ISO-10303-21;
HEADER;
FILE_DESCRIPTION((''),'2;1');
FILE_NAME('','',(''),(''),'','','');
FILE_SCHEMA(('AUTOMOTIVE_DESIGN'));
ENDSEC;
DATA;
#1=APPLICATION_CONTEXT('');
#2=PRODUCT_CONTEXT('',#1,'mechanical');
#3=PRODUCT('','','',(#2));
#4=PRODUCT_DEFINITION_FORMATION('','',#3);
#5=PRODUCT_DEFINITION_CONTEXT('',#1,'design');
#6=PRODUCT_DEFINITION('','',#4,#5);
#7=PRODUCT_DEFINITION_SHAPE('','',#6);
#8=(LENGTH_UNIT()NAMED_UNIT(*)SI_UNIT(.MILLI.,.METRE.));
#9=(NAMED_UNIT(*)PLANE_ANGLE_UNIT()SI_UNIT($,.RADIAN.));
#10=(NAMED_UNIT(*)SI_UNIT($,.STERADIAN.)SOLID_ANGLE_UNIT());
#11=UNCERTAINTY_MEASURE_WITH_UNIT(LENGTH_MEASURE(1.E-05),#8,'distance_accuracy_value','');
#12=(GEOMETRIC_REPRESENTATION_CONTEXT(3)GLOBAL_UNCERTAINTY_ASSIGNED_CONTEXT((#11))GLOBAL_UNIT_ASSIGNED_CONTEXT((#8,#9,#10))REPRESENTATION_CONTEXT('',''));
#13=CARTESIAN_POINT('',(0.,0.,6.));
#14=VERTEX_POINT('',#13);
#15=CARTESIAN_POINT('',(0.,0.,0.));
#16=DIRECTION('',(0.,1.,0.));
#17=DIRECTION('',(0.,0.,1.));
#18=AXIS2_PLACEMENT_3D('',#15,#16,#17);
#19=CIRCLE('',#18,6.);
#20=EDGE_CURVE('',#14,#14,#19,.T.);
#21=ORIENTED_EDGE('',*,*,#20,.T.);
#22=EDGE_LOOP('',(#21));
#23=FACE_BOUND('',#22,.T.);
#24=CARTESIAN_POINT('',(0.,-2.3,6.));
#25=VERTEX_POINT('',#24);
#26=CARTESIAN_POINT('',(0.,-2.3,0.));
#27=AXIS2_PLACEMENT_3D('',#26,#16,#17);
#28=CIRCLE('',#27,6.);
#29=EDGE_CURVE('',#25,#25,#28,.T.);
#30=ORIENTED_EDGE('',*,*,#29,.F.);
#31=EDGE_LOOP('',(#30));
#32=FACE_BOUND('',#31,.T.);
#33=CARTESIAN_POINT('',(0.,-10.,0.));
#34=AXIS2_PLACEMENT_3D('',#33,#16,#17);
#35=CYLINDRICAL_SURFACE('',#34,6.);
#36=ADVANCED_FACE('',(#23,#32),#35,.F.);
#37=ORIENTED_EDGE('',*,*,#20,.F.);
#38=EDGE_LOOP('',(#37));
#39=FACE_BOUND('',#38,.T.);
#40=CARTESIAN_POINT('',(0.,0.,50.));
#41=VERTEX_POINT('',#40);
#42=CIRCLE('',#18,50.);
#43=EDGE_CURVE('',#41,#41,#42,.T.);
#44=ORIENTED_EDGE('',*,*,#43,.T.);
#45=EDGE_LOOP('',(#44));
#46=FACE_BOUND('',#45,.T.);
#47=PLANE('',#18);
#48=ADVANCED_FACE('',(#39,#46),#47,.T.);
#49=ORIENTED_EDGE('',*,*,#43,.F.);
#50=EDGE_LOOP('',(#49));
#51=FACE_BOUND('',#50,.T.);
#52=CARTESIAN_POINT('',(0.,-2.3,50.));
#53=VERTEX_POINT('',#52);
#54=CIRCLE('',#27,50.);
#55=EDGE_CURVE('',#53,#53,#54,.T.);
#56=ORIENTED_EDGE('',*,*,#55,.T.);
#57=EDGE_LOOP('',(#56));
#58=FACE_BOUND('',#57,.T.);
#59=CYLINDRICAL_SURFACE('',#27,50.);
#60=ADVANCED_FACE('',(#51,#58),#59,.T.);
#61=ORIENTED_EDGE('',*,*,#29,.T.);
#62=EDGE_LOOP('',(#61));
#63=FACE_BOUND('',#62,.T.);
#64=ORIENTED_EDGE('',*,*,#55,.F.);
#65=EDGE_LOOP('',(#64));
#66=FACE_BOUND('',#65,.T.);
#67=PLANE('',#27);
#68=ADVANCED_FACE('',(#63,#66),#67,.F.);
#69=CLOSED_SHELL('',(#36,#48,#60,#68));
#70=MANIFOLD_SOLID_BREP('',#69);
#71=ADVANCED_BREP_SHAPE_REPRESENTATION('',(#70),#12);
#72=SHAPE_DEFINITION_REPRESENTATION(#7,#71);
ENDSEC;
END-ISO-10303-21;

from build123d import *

# Parameters (mm, degrees)
SKETCH1_R          = 50
BASE_FLANGE1_DEPTH = 2.3
SKETCH6_R          = 6
CUT_EXTRUDE1_DEPTH = 10


# Sheet-metal steps are written as plain solids
with BuildPart() as part:
    # Sketch1 → Base-Flange1 (new body)
    with BuildSketch(Plane(origin=(0, 0, 0), x_dir=(1, 0, 0), z_dir=(0, 1, 0))):
        with Locations(Location((0, 0, 0), (0, 0, 270))):
            Circle(SKETCH1_R)
    extrude(amount=-BASE_FLANGE1_DEPTH)

    # Sketch6 → Cut-Extrude1 (cut)
    with BuildSketch(Plane(origin=(0, 0, 0), x_dir=(1, 0, 0), z_dir=(0, 1, 0))):
        with Locations(Location((0, 0, 0), (0, 0, 270))):
            Circle(SKETCH6_R)
    extrude(amount=-CUT_EXTRUDE1_DEPTH, mode=Mode.SUBTRACT)


solid = part.part
